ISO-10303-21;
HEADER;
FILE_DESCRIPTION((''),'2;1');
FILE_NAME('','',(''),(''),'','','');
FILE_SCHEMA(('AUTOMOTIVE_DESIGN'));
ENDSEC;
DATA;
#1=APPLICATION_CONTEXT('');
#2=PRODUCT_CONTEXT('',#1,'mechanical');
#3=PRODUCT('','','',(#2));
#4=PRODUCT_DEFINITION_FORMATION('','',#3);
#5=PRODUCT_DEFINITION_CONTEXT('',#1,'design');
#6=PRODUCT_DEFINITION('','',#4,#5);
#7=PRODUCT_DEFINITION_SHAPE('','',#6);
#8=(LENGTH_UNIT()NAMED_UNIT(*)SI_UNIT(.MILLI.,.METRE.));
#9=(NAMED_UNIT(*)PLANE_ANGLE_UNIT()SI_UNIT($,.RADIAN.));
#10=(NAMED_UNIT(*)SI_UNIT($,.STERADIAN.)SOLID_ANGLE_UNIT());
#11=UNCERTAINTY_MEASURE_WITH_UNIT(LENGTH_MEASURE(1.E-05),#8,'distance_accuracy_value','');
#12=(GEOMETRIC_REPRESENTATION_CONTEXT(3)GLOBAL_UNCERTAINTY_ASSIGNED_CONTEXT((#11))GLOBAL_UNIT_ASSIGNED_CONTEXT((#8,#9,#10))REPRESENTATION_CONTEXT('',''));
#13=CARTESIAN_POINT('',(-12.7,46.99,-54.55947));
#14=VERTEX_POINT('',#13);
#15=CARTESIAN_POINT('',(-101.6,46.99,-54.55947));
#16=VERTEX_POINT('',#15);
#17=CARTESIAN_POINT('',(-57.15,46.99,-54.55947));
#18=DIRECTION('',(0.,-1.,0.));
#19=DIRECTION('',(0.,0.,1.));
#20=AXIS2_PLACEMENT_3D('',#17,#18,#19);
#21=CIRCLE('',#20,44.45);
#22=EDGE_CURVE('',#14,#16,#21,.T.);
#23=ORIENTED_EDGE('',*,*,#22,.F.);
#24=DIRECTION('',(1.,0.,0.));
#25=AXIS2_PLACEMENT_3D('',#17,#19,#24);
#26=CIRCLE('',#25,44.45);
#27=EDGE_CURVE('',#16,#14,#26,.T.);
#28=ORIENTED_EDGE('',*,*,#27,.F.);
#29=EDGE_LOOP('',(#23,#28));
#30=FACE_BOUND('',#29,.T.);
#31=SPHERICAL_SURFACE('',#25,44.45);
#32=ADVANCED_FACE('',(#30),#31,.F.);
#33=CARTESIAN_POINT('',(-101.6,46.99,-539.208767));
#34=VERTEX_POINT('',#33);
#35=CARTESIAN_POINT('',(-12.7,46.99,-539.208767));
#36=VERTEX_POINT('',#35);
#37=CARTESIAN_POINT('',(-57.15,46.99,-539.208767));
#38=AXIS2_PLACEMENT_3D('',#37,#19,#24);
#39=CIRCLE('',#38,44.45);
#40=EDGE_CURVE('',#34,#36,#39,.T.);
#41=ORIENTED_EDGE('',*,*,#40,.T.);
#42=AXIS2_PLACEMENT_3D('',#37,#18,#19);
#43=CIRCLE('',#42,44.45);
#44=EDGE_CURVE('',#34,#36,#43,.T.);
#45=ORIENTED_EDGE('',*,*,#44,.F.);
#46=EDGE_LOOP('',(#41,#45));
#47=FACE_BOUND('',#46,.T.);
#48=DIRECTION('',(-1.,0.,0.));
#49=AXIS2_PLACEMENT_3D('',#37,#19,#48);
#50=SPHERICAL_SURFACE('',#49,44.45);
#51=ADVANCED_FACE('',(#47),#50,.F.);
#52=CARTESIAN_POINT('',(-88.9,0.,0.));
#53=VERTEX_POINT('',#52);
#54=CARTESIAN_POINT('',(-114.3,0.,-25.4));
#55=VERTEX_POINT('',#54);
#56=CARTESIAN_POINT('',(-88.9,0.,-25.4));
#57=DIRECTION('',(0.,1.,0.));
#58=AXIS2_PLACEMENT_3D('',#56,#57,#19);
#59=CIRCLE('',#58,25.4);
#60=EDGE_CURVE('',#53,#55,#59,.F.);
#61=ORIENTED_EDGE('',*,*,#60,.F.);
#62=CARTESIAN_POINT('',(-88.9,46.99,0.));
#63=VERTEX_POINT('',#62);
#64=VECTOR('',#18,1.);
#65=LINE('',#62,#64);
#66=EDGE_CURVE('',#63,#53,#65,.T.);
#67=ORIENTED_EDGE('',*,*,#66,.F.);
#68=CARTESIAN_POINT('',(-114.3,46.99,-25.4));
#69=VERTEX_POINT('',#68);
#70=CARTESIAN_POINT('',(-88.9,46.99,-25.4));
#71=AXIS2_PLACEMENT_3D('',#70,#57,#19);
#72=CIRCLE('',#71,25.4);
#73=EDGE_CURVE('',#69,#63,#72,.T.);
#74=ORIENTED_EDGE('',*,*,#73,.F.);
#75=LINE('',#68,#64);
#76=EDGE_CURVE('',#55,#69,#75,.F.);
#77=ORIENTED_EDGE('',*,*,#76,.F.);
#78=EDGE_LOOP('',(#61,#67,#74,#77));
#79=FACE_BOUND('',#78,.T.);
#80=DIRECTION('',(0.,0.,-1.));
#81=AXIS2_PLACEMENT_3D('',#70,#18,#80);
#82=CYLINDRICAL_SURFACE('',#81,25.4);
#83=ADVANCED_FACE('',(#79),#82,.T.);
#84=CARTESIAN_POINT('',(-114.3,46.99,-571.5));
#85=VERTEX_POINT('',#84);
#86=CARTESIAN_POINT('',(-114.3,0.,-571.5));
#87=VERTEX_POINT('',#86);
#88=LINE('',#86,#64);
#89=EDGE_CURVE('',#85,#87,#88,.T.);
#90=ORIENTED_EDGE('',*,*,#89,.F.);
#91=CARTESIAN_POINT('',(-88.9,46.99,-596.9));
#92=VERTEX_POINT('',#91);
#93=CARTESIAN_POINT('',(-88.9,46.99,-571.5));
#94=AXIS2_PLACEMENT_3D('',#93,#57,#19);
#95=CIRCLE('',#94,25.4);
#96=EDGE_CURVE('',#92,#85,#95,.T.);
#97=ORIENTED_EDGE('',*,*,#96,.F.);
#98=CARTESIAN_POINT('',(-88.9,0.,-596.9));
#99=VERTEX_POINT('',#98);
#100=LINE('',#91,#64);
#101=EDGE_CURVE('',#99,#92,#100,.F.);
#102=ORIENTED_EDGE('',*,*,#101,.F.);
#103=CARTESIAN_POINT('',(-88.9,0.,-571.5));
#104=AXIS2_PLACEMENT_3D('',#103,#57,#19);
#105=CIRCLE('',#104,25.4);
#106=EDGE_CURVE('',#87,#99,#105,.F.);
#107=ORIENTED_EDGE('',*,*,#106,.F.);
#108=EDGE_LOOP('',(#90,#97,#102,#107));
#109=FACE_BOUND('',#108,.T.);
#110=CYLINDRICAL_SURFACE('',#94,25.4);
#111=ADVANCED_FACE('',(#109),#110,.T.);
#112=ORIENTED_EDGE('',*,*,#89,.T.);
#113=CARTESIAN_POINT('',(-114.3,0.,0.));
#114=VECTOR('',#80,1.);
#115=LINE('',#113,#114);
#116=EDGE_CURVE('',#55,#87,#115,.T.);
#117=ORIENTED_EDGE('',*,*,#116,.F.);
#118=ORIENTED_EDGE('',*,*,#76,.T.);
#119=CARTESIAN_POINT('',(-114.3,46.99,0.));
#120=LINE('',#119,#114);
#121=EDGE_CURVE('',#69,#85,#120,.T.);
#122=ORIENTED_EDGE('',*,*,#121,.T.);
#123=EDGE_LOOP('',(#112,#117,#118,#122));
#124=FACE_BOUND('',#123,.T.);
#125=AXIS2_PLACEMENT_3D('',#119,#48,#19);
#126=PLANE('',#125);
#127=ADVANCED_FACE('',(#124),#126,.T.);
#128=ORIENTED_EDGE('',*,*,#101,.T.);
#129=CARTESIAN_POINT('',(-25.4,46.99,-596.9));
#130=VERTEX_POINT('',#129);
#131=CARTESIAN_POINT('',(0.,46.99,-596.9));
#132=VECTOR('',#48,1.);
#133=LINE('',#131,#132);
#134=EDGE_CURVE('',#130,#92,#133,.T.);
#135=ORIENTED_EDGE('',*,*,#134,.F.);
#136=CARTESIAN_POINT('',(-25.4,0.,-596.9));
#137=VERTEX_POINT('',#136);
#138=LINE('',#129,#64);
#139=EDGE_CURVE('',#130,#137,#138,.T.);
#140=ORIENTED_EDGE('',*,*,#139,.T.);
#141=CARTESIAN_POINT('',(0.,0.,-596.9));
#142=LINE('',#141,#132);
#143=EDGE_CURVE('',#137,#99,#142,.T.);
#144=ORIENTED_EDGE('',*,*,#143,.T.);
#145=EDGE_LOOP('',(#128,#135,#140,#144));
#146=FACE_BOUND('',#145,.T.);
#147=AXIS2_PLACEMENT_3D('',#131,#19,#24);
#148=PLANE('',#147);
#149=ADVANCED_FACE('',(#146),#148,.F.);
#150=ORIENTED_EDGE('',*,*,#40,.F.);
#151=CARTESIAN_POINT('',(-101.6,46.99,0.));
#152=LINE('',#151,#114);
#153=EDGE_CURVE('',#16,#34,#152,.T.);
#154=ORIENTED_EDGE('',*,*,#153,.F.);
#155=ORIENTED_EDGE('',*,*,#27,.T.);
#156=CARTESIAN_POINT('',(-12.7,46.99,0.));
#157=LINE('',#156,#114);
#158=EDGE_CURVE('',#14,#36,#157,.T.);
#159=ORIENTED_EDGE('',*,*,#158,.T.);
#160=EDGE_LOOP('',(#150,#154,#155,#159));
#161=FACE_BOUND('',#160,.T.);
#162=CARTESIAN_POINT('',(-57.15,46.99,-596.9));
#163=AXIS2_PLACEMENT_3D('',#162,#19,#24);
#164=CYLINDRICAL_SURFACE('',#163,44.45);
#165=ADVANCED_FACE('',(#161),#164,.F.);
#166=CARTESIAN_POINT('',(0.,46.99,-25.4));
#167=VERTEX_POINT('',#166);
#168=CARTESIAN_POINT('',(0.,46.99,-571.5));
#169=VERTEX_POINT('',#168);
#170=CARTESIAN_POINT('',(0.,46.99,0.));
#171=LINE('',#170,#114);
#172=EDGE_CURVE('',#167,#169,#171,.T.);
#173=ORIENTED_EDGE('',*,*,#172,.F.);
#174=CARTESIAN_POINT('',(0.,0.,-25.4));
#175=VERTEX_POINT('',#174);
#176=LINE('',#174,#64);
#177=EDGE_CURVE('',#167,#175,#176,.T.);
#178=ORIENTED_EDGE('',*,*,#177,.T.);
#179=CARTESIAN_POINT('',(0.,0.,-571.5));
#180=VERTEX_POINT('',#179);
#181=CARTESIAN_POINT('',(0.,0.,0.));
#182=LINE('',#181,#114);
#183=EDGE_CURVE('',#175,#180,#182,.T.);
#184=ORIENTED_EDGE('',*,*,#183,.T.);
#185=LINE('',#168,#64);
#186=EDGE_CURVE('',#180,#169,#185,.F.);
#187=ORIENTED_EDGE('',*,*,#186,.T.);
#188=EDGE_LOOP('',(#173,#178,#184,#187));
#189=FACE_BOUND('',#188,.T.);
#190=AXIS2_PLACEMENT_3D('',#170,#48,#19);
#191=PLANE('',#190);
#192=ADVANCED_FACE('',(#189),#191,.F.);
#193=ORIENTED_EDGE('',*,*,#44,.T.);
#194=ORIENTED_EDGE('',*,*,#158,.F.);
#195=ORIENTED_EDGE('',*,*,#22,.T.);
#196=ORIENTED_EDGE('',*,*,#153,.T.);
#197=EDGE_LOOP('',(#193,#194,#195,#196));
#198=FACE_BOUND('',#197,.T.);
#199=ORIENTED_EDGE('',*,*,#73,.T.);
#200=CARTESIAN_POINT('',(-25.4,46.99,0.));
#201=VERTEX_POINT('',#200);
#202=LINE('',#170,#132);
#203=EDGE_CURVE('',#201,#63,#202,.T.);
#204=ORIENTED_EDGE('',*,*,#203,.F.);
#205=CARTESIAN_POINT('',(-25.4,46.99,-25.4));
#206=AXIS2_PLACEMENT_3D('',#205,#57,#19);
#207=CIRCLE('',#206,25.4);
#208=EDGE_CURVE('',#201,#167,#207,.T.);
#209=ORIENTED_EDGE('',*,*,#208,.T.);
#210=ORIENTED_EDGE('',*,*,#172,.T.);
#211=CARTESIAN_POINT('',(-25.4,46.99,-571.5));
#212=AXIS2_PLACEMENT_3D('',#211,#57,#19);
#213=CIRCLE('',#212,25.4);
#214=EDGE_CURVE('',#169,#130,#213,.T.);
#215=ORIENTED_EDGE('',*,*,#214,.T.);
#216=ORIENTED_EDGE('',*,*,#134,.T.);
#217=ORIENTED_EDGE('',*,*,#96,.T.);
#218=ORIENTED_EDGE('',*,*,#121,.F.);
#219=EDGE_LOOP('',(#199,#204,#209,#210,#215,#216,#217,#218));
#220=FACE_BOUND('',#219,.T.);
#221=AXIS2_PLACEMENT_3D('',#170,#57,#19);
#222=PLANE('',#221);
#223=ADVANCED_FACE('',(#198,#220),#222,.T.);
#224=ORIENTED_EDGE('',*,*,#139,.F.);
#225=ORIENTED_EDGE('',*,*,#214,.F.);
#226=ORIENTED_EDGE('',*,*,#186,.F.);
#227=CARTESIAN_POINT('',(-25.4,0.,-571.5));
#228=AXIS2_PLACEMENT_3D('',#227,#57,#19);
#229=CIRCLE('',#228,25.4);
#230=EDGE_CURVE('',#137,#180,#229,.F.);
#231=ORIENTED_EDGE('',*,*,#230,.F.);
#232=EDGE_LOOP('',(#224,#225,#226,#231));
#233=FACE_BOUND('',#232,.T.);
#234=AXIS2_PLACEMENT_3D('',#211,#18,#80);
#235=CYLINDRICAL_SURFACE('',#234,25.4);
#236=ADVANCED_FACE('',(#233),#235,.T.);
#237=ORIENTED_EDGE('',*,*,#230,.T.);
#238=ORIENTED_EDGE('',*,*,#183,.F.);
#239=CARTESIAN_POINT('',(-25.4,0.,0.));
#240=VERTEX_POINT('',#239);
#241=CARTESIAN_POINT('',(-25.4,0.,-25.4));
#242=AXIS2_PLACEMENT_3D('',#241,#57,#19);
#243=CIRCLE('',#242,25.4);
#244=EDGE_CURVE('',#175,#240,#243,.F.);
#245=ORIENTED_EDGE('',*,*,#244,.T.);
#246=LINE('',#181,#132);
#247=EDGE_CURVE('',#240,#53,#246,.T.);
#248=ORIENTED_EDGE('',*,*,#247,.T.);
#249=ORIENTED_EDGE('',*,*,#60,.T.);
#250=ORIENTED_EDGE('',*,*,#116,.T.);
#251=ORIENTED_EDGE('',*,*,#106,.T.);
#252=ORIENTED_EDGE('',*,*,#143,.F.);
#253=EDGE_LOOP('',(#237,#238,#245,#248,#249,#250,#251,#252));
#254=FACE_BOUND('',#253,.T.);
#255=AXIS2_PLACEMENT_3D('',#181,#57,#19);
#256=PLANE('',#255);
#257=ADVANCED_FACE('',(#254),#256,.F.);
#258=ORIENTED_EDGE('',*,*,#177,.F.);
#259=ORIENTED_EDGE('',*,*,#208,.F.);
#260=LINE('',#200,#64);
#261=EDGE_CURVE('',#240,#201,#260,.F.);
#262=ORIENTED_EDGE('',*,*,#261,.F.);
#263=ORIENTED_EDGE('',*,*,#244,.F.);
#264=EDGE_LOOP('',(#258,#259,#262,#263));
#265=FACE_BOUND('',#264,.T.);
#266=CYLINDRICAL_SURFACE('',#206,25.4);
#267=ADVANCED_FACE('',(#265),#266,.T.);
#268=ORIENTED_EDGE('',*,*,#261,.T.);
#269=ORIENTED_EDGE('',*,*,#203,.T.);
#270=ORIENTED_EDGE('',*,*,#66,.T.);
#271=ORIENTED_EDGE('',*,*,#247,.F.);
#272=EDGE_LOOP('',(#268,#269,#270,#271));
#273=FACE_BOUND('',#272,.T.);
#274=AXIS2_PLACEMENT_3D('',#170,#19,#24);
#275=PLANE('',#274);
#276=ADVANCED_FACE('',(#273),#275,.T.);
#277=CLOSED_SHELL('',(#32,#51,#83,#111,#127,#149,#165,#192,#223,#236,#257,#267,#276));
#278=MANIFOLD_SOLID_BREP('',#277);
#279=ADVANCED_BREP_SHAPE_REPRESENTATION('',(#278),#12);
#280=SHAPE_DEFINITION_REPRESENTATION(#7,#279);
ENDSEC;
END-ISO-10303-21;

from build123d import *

# Parameters (mm, degrees)
SKETCH1_W           = 114.3
SKETCH1_H           = 596.9
BOSS_EXTRUDE1_DEPTH = 46.99
CUT_REVOLVE1_ANGLE  = 180
FILLET1_R           = 25.4


with BuildPart() as part:
    # Sketch1 → Boss-Extrude1 (new body)
    with BuildSketch(Plane(origin=(0, 0, 0), x_dir=(1, 0, 0), z_dir=(0, 1, 0))):
        with Locations((-57.15, 298.45)):
            Rectangle(SKETCH1_W, SKETCH1_H)
    extrude(amount=BOSS_EXTRUDE1_DEPTH)

    # Sketch2 → Cut-Revolve1 (revolve, cut)
    with BuildSketch(Plane(origin=(0, 46.99, 0), x_dir=(1, 0, 0), z_dir=(0, 1, 0))):
        with BuildLine():
            ThreePointArc((-12.7, 539.208766564), (-25.719103576, 570.639662987), (-57.15, 583.658766564))
            Line((-57.15, 583.658766564), (-57.15, 10.109470377))
            ThreePointArc((-57.15, 10.109470377), (-25.719103576, 23.128573953), (-12.7, 54.559470377))
            Line((-12.7, 54.559470377), (-12.7, 539.208766564))
        make_face()
    revolve(axis=Axis((-57.15, 46.99, -596.9), (0, 0, -1)), revolution_arc=CUT_REVOLVE1_ANGLE, mode=Mode.SUBTRACT)

    # Fillet1
    fillet1_edges = [part.edges().sort_by_distance(p)[0] for p in [
        (0, 23.495, 0),
        (-114.3, 23.495, 0),
        (-114.3, 23.495, -596.9),
        (0, 23.495, -596.9),
    ]]
    fillet(fillet1_edges, radius=FILLET1_R)


solid = part.part
